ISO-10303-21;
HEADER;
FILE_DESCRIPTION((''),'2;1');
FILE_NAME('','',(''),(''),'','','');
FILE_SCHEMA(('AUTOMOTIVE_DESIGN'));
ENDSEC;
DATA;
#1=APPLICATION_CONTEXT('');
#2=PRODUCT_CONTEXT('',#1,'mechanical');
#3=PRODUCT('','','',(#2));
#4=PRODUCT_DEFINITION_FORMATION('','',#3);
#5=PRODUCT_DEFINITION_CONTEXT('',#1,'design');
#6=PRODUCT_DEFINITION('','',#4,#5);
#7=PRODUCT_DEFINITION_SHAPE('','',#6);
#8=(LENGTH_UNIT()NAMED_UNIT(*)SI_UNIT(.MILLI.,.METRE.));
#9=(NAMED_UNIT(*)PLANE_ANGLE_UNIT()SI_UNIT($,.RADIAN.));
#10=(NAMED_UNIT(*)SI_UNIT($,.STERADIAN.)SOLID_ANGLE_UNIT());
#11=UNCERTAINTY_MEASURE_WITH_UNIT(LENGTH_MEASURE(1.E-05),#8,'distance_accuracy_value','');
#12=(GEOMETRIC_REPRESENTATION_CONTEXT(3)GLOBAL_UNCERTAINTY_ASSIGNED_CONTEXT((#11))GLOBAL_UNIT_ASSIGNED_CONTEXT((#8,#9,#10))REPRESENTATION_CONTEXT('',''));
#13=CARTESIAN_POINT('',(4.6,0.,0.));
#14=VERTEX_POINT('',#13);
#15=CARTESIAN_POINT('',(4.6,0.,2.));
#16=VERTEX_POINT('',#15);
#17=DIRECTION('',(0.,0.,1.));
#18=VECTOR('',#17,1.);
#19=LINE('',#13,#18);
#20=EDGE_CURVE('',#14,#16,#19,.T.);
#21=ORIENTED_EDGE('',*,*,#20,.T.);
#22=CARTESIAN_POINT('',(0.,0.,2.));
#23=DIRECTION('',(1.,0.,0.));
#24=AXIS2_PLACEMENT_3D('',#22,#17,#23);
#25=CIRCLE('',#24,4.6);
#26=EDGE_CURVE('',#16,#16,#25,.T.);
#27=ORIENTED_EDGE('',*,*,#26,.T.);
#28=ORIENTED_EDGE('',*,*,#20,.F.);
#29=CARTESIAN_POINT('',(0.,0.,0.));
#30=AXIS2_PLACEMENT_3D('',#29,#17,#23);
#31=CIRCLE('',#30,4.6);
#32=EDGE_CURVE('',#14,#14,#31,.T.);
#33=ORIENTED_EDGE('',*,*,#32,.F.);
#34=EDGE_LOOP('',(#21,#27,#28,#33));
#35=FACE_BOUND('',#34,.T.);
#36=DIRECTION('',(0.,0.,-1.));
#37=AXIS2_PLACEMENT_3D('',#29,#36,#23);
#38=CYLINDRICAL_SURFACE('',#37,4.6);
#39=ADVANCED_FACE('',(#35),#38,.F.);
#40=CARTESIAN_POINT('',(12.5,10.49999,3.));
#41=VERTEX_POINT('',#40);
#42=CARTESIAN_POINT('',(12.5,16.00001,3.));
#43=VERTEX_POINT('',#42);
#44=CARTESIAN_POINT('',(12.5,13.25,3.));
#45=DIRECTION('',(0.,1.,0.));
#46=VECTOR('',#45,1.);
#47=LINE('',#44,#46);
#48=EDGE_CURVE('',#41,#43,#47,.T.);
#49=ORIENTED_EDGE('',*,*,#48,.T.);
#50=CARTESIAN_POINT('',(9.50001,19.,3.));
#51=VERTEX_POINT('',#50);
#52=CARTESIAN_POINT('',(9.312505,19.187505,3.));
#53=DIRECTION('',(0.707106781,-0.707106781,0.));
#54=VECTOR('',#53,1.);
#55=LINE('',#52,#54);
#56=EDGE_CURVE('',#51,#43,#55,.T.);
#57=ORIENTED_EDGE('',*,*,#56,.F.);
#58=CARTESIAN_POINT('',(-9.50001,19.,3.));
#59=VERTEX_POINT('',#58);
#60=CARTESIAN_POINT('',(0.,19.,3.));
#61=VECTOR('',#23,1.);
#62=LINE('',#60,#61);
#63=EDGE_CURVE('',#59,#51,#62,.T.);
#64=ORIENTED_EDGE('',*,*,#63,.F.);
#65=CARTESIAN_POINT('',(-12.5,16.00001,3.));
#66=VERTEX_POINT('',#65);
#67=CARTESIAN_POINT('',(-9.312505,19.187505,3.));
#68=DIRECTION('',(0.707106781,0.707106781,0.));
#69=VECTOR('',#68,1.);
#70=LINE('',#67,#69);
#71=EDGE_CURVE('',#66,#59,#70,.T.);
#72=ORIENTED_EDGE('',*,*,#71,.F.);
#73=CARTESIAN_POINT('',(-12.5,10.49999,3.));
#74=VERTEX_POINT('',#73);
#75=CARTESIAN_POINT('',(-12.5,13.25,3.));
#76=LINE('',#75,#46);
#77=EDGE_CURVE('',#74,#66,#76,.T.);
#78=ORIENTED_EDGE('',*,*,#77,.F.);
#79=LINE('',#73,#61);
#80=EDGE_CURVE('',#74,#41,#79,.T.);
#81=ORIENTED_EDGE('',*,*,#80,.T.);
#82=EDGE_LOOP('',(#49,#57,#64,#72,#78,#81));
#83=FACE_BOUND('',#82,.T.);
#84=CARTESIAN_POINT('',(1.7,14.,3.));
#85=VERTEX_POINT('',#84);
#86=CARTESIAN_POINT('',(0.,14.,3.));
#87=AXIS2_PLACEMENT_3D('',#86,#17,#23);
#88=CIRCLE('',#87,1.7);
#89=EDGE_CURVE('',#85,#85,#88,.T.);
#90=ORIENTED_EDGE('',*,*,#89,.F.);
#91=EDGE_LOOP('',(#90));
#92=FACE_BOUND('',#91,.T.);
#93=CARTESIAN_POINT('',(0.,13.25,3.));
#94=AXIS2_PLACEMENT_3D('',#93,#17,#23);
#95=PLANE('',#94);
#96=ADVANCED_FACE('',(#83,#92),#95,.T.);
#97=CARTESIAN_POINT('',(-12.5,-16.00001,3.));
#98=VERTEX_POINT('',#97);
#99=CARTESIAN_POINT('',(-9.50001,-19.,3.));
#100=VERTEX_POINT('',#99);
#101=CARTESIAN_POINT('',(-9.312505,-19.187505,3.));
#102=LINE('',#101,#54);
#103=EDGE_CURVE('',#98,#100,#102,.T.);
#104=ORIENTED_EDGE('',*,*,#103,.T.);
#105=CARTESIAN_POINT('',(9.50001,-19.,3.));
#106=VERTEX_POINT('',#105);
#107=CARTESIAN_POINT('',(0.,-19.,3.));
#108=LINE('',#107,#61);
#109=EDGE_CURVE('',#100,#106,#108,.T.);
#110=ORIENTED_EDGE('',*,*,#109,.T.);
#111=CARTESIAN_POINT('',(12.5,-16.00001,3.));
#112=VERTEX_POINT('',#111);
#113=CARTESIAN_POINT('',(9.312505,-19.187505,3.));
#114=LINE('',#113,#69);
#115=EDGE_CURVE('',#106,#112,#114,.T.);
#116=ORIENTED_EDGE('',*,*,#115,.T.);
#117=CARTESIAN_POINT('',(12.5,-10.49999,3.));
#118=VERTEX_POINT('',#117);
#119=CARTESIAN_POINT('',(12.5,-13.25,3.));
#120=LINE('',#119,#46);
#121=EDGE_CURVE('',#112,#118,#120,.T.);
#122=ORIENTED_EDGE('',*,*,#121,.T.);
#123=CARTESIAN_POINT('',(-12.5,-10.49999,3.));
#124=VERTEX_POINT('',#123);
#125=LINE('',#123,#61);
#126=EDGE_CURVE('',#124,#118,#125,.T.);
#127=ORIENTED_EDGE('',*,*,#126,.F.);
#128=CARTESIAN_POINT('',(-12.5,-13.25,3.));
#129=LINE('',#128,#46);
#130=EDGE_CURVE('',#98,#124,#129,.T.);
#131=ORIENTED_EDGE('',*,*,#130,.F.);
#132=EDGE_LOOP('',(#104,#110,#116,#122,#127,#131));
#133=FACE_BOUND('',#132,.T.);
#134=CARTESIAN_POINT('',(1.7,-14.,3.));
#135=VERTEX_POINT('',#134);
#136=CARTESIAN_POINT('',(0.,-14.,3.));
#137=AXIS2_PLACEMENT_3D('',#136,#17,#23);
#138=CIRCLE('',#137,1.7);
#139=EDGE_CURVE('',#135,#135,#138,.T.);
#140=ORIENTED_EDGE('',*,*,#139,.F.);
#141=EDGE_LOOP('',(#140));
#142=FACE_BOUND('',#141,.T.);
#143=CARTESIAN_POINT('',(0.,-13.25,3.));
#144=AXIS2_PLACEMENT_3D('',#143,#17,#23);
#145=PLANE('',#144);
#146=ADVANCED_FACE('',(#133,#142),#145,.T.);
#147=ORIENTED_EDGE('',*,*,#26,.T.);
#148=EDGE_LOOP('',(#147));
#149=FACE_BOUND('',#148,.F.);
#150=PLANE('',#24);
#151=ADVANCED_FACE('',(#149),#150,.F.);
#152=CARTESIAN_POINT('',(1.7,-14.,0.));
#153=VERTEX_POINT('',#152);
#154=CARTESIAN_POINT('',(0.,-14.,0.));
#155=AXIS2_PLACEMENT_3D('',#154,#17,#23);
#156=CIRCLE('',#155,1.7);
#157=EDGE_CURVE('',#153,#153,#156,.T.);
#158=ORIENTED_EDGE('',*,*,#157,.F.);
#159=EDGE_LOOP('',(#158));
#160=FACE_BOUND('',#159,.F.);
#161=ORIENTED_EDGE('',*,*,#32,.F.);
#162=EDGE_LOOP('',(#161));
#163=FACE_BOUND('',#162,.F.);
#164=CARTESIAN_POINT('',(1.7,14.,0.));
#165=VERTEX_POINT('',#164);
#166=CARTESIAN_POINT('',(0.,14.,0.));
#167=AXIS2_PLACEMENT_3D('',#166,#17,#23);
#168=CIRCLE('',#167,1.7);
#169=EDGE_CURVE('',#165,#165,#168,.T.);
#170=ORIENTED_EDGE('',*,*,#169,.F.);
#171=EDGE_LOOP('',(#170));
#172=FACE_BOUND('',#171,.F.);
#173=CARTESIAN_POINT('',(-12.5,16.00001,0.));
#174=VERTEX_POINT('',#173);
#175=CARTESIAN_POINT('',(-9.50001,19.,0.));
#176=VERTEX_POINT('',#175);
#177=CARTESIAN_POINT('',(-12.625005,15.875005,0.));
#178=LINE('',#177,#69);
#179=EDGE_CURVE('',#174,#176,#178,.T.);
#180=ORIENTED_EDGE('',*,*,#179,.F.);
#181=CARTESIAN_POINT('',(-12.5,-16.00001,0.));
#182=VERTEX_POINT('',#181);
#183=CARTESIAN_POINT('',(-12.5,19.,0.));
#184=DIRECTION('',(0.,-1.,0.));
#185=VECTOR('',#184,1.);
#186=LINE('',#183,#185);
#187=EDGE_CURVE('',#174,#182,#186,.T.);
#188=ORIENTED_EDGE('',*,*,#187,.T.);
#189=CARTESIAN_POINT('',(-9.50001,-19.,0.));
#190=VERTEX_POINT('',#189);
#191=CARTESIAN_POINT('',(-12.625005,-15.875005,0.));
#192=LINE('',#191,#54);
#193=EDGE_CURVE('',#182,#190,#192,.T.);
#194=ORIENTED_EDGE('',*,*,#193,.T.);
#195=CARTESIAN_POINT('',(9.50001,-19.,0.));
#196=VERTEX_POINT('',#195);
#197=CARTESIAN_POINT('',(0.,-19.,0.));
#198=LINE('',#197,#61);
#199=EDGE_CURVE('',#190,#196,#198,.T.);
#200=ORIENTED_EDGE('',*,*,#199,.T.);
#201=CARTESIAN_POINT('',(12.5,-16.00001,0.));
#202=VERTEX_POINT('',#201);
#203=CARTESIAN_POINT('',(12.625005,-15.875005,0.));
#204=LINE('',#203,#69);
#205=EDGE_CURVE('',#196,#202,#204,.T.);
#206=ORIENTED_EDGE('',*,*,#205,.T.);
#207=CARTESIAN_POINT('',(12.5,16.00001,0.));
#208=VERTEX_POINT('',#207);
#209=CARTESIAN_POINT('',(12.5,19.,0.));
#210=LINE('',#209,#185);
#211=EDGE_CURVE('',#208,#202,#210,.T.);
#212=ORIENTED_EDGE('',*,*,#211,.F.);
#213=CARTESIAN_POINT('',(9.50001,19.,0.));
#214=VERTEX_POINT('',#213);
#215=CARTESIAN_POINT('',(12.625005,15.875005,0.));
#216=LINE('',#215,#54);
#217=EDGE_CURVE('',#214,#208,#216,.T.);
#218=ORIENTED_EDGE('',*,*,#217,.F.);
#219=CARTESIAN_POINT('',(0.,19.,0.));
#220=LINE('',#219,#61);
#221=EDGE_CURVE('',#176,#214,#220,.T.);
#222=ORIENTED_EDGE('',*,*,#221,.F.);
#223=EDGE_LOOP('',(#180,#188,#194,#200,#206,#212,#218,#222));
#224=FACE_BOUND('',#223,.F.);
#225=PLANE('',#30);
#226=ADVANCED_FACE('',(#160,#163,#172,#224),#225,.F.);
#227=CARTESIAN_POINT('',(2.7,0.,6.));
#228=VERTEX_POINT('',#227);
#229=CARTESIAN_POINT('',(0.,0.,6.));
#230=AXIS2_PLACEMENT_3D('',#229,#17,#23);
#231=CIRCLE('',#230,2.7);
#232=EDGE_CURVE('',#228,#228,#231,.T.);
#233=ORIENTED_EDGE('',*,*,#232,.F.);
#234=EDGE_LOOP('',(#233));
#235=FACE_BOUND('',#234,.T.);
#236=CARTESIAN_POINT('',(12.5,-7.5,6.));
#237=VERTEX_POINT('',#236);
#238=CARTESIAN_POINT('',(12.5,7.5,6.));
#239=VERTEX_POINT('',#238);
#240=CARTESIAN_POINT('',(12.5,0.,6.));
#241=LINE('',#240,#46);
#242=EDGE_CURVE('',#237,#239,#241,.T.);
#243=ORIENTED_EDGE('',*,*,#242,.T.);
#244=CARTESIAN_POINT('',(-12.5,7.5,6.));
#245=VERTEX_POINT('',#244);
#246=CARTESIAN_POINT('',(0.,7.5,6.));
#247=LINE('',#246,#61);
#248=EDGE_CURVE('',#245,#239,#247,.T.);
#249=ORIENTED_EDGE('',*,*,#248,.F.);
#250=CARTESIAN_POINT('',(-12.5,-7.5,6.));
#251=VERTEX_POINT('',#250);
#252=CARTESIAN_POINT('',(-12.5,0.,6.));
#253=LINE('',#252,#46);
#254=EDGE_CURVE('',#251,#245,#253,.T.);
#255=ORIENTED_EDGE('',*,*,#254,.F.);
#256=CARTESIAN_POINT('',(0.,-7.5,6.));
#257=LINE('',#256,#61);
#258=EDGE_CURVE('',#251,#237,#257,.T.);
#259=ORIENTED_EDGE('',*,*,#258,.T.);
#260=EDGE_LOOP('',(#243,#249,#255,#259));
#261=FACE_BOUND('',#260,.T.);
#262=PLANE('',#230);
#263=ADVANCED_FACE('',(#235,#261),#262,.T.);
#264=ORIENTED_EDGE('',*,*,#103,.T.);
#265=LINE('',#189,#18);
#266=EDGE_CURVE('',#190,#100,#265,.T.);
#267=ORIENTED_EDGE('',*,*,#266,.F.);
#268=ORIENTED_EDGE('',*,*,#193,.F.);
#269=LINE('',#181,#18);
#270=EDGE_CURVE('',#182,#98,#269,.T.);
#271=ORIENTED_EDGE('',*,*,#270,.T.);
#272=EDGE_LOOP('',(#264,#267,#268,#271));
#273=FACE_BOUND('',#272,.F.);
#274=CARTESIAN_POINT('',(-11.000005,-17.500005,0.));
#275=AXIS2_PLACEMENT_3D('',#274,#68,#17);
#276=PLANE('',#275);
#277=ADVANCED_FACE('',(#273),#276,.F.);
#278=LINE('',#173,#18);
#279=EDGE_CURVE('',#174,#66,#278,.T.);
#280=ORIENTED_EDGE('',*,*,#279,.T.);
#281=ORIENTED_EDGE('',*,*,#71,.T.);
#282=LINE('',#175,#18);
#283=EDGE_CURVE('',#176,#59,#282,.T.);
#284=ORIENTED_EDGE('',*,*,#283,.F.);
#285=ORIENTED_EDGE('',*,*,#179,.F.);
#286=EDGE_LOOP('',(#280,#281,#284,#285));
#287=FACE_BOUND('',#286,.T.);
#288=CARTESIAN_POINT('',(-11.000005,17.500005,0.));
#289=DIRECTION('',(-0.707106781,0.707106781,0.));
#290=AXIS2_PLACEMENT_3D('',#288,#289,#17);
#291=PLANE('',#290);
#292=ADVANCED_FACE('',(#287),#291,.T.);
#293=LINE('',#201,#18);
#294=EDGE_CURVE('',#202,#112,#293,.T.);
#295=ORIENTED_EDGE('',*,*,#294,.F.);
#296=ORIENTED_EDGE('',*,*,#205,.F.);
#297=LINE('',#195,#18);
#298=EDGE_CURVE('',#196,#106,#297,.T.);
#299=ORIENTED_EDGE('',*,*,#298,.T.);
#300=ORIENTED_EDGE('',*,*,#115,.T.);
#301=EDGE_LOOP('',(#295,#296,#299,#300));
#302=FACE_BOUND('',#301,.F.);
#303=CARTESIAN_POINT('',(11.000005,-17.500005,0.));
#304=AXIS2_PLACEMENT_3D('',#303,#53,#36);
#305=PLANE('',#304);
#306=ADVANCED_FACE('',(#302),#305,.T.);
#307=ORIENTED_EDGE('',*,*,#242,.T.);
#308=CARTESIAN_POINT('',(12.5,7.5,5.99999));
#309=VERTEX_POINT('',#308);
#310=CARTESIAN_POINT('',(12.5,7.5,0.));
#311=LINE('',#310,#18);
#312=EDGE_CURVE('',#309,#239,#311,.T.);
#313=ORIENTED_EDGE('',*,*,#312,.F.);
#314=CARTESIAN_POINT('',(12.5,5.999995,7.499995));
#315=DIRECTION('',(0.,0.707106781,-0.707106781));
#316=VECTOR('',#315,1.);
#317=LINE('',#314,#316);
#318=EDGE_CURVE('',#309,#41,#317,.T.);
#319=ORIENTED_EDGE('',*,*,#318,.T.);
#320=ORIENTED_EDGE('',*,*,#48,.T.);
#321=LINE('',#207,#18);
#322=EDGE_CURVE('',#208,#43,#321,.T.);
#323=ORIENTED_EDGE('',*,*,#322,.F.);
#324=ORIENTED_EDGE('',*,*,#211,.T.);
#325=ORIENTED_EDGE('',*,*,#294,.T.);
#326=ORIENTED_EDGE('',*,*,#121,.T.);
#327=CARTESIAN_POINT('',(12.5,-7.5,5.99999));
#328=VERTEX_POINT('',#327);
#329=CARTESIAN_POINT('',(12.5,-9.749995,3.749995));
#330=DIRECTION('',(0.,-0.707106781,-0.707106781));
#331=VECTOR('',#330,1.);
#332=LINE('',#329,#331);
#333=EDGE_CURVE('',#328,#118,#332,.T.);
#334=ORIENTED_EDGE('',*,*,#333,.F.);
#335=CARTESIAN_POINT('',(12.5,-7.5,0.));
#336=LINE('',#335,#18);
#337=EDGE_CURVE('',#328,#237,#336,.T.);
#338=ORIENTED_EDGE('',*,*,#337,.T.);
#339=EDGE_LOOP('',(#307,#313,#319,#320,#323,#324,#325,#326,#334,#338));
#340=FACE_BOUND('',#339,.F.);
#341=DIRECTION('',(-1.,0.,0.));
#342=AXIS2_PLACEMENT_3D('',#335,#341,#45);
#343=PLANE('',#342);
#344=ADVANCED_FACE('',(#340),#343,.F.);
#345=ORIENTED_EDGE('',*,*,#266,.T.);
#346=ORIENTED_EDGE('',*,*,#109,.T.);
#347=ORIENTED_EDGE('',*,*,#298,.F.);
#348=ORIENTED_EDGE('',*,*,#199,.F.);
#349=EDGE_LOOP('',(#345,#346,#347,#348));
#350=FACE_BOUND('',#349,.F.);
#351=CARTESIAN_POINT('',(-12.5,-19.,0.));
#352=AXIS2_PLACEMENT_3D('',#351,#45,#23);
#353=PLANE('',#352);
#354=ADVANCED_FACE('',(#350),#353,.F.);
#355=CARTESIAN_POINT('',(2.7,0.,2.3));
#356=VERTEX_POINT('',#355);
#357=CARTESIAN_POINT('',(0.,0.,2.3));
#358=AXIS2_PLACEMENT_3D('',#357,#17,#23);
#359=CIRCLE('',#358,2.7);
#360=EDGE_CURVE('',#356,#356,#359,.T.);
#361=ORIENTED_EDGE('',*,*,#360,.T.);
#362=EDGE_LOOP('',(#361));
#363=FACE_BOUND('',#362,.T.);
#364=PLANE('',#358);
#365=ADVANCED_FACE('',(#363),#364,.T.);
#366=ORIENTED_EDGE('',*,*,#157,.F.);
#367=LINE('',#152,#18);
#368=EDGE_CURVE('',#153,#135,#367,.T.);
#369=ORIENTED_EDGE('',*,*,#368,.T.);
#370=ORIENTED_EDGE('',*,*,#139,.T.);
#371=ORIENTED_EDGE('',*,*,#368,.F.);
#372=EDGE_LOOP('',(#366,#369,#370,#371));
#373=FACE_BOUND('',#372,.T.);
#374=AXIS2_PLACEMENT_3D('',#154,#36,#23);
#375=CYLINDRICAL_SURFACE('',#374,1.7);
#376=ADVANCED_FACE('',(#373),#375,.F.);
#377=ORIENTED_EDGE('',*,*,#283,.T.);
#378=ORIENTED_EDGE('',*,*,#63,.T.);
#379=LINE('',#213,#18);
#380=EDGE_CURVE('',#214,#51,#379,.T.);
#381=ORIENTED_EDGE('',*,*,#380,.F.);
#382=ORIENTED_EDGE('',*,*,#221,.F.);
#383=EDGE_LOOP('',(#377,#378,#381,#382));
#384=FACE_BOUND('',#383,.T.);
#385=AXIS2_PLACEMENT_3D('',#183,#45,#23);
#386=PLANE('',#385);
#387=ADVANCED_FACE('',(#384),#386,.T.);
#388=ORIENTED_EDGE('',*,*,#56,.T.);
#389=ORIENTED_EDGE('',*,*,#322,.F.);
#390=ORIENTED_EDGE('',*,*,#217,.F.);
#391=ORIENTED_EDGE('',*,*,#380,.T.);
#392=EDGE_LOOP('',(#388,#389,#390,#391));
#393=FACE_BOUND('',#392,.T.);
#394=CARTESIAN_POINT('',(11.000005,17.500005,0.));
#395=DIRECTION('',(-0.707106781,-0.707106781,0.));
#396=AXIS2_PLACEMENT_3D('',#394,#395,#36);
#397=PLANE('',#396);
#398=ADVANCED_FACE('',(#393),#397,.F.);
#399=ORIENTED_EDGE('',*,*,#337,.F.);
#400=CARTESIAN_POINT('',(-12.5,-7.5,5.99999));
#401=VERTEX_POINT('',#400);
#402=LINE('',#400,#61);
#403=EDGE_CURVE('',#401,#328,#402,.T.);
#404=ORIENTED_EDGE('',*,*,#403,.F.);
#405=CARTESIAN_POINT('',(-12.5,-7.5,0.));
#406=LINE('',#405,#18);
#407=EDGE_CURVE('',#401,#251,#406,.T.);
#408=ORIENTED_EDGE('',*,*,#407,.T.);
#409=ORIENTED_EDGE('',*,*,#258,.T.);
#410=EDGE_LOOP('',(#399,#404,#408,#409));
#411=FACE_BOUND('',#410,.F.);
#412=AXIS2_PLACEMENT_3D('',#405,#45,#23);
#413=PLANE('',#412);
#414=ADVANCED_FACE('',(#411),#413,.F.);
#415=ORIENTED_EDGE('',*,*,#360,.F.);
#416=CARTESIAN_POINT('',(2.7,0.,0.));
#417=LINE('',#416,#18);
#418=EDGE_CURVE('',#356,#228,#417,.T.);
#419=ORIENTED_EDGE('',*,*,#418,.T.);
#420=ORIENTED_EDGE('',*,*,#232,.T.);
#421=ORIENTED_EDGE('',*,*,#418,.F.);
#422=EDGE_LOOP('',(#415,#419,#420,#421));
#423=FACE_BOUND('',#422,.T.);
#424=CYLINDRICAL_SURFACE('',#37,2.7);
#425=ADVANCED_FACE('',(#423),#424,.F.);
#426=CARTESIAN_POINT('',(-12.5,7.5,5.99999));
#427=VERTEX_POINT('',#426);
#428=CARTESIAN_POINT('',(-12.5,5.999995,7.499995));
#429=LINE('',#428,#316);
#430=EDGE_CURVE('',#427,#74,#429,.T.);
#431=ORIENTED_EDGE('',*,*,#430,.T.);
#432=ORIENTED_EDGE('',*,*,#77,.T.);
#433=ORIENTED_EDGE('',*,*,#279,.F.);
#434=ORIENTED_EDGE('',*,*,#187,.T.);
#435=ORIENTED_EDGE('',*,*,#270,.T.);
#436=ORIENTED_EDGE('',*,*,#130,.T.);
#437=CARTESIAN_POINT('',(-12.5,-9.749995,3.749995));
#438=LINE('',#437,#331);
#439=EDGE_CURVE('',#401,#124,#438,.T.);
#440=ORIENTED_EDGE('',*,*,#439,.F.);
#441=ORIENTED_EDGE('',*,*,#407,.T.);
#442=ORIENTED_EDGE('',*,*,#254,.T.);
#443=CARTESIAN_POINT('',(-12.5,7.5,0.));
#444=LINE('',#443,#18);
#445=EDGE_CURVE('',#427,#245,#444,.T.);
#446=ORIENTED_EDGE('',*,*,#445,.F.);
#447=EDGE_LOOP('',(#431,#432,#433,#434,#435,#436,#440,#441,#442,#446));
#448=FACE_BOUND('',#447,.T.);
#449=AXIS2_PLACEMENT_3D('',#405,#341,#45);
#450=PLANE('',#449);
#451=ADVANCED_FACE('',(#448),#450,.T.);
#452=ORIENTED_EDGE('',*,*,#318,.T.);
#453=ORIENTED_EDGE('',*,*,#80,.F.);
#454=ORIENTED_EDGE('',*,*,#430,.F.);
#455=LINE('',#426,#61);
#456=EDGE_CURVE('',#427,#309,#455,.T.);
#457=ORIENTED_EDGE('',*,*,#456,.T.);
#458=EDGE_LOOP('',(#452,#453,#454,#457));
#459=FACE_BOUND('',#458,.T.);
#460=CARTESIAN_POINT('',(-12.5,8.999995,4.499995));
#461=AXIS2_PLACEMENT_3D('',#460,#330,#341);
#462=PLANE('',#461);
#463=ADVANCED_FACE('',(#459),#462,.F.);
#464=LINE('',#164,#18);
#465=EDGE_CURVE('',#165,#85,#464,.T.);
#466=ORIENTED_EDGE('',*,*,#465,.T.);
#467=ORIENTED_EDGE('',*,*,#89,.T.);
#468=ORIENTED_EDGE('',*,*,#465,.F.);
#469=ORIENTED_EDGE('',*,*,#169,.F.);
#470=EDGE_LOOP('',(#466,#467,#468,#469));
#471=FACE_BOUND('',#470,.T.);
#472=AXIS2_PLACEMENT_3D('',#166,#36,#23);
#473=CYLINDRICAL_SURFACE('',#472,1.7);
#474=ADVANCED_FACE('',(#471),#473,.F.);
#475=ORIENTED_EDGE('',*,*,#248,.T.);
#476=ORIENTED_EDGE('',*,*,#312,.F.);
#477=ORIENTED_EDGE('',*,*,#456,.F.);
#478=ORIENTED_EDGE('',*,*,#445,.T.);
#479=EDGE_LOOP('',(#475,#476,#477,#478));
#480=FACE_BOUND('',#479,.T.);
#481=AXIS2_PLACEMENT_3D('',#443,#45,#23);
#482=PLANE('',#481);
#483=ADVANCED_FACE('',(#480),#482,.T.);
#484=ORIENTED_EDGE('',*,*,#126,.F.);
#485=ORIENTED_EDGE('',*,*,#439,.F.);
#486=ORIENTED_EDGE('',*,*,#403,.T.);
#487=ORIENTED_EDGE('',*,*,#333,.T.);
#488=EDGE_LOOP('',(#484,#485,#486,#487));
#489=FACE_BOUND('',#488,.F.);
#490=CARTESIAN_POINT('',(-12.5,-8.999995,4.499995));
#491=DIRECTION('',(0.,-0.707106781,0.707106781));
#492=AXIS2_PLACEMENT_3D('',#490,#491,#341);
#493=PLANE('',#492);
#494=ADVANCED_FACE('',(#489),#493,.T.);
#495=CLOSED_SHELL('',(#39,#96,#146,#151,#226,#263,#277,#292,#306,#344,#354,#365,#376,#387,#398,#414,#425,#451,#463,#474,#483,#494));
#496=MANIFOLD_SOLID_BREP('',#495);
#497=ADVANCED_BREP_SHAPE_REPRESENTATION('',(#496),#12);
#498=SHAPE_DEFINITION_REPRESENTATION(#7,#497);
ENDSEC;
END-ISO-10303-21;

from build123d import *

# Parameters (mm, degrees)
F0_W     = 25
F0_H     = 11.5
F0_R     = 1.7
F1_DEPTH = 3
F0_H_2   = 15
F0_R_2   = 4.6
F0_R_3   = 2.7
F2_DEPTH = 6
F3_DEPTH = 2
F4_SIZE  = 2.99999
F5_START = 2
F5_DEPTH = 0.3


# Not quite as in the source:
# - a fillet or chamfer is up to 0.001 mm smaller than in the source, because OpenCascade refuses the exact size


with BuildPart() as f1:
    # F0 (on Top) → F1 (new body)
    with BuildSketch(Plane.XY):
        with Locations((0, 13.25)):
            Rectangle(F0_W, F0_H)
        with Locations((0, 14)):
            Circle(F0_R, mode=Mode.SUBTRACT)
    extrude(amount=F1_DEPTH)



with BuildPart() as f1b:
    # F0 (on Top) → F1, piece 2 (new body)
    with BuildSketch(Plane.XY):
        with Locations((0, -13.25)):
            Rectangle(F0_W, F0_H)
        with Locations((0, -14)):
            Circle(F0_R, mode=Mode.SUBTRACT)
    extrude(amount=F1_DEPTH)


with BuildPart() as f1_1:
    add(f1.part)

    add(f1b.part)  # F2 merges F1b
    # F0 (on Top) → F2 (join)
    with BuildSketch(Plane.XY):
        Rectangle(F0_W, F0_H_2)
        Circle(F0_R_2, mode=Mode.SUBTRACT)
        Circle(F0_R_2)
        Circle(F0_R_3, mode=Mode.SUBTRACT)
    extrude(amount=F2_DEPTH)

    # F0 (on Top) → F3 (cut)
    with BuildSketch(Plane.XY):
        Circle(F0_R_2)
        Circle(F0_R_3, mode=Mode.SUBTRACT)
    extrude(amount=F3_DEPTH, mode=Mode.SUBTRACT)

    # F4 (size 3 in the source; OpenCascade refuses exactly that, so slightly less here)
    f4_edges = [f1_1.edges().sort_by_distance(p)[0] for p in [
        (0, 7.5, 3),
        (0, -7.5, 3),
        (12.5, -19, 1.5),
        (-12.5, -19, 1.5),
        (12.5, 19, 1.5),
        (-12.5, 19, 1.5),
    ]]
    chamfer(f4_edges, length=F4_SIZE)

    # F0 (on Top) → F5 (join)
    with BuildSketch(Plane.XY.offset(F5_START)):
        Circle(F0_R_3)
    extrude(amount=F5_DEPTH)


solid = f1_1.part
